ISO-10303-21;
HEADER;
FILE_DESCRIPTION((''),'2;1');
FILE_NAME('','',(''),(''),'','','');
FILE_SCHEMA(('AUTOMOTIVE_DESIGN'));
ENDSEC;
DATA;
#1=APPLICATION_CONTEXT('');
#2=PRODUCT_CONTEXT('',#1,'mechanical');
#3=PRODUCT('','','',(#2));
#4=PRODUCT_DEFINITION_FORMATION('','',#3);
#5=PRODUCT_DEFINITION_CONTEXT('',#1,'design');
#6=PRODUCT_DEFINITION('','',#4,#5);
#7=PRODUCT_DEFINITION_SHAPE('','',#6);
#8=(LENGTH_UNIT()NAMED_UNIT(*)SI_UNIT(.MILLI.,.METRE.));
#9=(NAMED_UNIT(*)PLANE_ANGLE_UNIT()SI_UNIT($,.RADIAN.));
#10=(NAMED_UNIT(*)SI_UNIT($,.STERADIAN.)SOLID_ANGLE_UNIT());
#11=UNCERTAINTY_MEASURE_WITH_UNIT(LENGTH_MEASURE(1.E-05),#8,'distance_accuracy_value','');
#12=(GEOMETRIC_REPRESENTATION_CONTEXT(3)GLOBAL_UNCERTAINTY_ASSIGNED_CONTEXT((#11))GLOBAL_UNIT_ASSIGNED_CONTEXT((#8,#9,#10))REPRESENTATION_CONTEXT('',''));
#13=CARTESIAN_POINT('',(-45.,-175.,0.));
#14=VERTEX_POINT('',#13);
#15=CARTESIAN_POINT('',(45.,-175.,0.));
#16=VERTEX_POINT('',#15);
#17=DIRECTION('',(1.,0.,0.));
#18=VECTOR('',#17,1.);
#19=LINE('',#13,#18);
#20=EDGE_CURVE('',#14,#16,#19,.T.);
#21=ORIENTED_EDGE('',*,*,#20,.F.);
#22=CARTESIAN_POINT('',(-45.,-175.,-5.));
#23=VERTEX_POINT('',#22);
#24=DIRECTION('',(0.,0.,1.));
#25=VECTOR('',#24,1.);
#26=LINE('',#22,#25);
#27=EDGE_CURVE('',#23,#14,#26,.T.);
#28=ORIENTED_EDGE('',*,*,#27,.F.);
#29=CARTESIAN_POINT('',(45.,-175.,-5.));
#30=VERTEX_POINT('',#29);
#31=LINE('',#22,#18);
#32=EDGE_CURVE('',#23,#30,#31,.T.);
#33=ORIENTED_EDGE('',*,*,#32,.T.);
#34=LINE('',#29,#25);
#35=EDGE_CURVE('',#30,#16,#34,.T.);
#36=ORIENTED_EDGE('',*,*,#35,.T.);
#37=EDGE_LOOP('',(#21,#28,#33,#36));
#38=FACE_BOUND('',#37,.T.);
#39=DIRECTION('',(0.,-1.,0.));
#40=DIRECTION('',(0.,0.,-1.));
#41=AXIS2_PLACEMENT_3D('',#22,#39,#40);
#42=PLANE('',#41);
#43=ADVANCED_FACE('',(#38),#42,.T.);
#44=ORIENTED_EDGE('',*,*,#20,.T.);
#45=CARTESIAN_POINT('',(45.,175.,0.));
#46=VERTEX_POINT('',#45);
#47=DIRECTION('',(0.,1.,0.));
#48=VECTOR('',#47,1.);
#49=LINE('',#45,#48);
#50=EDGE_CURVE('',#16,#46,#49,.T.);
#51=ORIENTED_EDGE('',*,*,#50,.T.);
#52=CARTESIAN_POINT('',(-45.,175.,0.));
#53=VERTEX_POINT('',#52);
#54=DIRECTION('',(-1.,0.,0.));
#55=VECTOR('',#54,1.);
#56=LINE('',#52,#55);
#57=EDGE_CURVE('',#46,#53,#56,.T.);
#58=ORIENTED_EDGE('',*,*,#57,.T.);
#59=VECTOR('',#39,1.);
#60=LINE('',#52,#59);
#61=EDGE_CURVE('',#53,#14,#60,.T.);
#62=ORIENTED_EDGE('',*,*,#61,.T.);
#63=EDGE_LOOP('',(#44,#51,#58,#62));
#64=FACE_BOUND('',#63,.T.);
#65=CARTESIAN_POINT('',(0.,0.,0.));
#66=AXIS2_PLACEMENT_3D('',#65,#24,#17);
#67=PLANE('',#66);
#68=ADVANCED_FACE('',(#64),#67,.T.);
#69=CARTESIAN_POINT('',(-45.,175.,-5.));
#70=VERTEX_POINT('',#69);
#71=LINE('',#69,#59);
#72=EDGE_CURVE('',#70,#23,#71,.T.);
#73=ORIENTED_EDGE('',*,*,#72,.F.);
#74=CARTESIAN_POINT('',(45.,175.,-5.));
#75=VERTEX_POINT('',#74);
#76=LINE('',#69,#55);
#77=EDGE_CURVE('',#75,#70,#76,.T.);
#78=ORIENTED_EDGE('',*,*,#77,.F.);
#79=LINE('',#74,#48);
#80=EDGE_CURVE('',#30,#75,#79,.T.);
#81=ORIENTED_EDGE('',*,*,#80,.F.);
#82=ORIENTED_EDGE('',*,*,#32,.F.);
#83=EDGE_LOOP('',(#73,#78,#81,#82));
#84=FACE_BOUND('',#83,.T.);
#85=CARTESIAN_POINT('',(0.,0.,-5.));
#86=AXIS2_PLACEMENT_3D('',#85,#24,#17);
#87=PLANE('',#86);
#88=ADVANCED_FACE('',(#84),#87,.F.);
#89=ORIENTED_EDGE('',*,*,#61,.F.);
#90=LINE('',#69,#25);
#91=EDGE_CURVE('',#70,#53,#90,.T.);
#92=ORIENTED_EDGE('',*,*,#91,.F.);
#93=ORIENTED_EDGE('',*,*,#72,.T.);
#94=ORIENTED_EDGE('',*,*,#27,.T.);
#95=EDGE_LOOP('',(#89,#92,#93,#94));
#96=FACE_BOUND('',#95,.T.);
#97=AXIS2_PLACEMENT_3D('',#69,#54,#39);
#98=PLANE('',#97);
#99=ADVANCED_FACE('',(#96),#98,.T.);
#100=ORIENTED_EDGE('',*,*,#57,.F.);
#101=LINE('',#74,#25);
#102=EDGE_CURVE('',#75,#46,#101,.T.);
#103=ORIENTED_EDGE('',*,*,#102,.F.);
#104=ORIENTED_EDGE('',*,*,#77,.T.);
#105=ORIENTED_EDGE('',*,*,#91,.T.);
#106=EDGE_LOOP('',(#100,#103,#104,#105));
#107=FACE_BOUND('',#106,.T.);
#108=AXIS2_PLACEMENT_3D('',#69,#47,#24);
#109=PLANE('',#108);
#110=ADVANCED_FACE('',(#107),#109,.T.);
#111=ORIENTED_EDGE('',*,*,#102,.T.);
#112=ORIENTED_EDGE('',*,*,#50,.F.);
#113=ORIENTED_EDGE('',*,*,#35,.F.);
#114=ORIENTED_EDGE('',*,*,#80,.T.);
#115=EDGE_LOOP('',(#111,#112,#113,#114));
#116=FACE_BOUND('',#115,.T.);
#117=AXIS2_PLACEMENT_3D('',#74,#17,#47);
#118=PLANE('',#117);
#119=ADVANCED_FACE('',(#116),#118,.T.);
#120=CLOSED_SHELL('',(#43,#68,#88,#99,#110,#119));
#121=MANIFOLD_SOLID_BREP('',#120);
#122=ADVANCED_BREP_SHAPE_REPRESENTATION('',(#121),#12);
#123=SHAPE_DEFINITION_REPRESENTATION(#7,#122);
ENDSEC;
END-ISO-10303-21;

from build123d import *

# Parameters (mm, degrees)
SKETCH1_W          = 90
SKETCH1_H          = 350
BASE_FLANGE1_DEPTH = 5


# Sheet-metal steps are written as plain solids
with BuildPart() as part:
    # Sketch1 → Base-Flange1 (new body)
    with BuildSketch(Plane.XY):
        Rectangle(SKETCH1_W, SKETCH1_H)
    extrude(amount=-BASE_FLANGE1_DEPTH)


solid = part.part
